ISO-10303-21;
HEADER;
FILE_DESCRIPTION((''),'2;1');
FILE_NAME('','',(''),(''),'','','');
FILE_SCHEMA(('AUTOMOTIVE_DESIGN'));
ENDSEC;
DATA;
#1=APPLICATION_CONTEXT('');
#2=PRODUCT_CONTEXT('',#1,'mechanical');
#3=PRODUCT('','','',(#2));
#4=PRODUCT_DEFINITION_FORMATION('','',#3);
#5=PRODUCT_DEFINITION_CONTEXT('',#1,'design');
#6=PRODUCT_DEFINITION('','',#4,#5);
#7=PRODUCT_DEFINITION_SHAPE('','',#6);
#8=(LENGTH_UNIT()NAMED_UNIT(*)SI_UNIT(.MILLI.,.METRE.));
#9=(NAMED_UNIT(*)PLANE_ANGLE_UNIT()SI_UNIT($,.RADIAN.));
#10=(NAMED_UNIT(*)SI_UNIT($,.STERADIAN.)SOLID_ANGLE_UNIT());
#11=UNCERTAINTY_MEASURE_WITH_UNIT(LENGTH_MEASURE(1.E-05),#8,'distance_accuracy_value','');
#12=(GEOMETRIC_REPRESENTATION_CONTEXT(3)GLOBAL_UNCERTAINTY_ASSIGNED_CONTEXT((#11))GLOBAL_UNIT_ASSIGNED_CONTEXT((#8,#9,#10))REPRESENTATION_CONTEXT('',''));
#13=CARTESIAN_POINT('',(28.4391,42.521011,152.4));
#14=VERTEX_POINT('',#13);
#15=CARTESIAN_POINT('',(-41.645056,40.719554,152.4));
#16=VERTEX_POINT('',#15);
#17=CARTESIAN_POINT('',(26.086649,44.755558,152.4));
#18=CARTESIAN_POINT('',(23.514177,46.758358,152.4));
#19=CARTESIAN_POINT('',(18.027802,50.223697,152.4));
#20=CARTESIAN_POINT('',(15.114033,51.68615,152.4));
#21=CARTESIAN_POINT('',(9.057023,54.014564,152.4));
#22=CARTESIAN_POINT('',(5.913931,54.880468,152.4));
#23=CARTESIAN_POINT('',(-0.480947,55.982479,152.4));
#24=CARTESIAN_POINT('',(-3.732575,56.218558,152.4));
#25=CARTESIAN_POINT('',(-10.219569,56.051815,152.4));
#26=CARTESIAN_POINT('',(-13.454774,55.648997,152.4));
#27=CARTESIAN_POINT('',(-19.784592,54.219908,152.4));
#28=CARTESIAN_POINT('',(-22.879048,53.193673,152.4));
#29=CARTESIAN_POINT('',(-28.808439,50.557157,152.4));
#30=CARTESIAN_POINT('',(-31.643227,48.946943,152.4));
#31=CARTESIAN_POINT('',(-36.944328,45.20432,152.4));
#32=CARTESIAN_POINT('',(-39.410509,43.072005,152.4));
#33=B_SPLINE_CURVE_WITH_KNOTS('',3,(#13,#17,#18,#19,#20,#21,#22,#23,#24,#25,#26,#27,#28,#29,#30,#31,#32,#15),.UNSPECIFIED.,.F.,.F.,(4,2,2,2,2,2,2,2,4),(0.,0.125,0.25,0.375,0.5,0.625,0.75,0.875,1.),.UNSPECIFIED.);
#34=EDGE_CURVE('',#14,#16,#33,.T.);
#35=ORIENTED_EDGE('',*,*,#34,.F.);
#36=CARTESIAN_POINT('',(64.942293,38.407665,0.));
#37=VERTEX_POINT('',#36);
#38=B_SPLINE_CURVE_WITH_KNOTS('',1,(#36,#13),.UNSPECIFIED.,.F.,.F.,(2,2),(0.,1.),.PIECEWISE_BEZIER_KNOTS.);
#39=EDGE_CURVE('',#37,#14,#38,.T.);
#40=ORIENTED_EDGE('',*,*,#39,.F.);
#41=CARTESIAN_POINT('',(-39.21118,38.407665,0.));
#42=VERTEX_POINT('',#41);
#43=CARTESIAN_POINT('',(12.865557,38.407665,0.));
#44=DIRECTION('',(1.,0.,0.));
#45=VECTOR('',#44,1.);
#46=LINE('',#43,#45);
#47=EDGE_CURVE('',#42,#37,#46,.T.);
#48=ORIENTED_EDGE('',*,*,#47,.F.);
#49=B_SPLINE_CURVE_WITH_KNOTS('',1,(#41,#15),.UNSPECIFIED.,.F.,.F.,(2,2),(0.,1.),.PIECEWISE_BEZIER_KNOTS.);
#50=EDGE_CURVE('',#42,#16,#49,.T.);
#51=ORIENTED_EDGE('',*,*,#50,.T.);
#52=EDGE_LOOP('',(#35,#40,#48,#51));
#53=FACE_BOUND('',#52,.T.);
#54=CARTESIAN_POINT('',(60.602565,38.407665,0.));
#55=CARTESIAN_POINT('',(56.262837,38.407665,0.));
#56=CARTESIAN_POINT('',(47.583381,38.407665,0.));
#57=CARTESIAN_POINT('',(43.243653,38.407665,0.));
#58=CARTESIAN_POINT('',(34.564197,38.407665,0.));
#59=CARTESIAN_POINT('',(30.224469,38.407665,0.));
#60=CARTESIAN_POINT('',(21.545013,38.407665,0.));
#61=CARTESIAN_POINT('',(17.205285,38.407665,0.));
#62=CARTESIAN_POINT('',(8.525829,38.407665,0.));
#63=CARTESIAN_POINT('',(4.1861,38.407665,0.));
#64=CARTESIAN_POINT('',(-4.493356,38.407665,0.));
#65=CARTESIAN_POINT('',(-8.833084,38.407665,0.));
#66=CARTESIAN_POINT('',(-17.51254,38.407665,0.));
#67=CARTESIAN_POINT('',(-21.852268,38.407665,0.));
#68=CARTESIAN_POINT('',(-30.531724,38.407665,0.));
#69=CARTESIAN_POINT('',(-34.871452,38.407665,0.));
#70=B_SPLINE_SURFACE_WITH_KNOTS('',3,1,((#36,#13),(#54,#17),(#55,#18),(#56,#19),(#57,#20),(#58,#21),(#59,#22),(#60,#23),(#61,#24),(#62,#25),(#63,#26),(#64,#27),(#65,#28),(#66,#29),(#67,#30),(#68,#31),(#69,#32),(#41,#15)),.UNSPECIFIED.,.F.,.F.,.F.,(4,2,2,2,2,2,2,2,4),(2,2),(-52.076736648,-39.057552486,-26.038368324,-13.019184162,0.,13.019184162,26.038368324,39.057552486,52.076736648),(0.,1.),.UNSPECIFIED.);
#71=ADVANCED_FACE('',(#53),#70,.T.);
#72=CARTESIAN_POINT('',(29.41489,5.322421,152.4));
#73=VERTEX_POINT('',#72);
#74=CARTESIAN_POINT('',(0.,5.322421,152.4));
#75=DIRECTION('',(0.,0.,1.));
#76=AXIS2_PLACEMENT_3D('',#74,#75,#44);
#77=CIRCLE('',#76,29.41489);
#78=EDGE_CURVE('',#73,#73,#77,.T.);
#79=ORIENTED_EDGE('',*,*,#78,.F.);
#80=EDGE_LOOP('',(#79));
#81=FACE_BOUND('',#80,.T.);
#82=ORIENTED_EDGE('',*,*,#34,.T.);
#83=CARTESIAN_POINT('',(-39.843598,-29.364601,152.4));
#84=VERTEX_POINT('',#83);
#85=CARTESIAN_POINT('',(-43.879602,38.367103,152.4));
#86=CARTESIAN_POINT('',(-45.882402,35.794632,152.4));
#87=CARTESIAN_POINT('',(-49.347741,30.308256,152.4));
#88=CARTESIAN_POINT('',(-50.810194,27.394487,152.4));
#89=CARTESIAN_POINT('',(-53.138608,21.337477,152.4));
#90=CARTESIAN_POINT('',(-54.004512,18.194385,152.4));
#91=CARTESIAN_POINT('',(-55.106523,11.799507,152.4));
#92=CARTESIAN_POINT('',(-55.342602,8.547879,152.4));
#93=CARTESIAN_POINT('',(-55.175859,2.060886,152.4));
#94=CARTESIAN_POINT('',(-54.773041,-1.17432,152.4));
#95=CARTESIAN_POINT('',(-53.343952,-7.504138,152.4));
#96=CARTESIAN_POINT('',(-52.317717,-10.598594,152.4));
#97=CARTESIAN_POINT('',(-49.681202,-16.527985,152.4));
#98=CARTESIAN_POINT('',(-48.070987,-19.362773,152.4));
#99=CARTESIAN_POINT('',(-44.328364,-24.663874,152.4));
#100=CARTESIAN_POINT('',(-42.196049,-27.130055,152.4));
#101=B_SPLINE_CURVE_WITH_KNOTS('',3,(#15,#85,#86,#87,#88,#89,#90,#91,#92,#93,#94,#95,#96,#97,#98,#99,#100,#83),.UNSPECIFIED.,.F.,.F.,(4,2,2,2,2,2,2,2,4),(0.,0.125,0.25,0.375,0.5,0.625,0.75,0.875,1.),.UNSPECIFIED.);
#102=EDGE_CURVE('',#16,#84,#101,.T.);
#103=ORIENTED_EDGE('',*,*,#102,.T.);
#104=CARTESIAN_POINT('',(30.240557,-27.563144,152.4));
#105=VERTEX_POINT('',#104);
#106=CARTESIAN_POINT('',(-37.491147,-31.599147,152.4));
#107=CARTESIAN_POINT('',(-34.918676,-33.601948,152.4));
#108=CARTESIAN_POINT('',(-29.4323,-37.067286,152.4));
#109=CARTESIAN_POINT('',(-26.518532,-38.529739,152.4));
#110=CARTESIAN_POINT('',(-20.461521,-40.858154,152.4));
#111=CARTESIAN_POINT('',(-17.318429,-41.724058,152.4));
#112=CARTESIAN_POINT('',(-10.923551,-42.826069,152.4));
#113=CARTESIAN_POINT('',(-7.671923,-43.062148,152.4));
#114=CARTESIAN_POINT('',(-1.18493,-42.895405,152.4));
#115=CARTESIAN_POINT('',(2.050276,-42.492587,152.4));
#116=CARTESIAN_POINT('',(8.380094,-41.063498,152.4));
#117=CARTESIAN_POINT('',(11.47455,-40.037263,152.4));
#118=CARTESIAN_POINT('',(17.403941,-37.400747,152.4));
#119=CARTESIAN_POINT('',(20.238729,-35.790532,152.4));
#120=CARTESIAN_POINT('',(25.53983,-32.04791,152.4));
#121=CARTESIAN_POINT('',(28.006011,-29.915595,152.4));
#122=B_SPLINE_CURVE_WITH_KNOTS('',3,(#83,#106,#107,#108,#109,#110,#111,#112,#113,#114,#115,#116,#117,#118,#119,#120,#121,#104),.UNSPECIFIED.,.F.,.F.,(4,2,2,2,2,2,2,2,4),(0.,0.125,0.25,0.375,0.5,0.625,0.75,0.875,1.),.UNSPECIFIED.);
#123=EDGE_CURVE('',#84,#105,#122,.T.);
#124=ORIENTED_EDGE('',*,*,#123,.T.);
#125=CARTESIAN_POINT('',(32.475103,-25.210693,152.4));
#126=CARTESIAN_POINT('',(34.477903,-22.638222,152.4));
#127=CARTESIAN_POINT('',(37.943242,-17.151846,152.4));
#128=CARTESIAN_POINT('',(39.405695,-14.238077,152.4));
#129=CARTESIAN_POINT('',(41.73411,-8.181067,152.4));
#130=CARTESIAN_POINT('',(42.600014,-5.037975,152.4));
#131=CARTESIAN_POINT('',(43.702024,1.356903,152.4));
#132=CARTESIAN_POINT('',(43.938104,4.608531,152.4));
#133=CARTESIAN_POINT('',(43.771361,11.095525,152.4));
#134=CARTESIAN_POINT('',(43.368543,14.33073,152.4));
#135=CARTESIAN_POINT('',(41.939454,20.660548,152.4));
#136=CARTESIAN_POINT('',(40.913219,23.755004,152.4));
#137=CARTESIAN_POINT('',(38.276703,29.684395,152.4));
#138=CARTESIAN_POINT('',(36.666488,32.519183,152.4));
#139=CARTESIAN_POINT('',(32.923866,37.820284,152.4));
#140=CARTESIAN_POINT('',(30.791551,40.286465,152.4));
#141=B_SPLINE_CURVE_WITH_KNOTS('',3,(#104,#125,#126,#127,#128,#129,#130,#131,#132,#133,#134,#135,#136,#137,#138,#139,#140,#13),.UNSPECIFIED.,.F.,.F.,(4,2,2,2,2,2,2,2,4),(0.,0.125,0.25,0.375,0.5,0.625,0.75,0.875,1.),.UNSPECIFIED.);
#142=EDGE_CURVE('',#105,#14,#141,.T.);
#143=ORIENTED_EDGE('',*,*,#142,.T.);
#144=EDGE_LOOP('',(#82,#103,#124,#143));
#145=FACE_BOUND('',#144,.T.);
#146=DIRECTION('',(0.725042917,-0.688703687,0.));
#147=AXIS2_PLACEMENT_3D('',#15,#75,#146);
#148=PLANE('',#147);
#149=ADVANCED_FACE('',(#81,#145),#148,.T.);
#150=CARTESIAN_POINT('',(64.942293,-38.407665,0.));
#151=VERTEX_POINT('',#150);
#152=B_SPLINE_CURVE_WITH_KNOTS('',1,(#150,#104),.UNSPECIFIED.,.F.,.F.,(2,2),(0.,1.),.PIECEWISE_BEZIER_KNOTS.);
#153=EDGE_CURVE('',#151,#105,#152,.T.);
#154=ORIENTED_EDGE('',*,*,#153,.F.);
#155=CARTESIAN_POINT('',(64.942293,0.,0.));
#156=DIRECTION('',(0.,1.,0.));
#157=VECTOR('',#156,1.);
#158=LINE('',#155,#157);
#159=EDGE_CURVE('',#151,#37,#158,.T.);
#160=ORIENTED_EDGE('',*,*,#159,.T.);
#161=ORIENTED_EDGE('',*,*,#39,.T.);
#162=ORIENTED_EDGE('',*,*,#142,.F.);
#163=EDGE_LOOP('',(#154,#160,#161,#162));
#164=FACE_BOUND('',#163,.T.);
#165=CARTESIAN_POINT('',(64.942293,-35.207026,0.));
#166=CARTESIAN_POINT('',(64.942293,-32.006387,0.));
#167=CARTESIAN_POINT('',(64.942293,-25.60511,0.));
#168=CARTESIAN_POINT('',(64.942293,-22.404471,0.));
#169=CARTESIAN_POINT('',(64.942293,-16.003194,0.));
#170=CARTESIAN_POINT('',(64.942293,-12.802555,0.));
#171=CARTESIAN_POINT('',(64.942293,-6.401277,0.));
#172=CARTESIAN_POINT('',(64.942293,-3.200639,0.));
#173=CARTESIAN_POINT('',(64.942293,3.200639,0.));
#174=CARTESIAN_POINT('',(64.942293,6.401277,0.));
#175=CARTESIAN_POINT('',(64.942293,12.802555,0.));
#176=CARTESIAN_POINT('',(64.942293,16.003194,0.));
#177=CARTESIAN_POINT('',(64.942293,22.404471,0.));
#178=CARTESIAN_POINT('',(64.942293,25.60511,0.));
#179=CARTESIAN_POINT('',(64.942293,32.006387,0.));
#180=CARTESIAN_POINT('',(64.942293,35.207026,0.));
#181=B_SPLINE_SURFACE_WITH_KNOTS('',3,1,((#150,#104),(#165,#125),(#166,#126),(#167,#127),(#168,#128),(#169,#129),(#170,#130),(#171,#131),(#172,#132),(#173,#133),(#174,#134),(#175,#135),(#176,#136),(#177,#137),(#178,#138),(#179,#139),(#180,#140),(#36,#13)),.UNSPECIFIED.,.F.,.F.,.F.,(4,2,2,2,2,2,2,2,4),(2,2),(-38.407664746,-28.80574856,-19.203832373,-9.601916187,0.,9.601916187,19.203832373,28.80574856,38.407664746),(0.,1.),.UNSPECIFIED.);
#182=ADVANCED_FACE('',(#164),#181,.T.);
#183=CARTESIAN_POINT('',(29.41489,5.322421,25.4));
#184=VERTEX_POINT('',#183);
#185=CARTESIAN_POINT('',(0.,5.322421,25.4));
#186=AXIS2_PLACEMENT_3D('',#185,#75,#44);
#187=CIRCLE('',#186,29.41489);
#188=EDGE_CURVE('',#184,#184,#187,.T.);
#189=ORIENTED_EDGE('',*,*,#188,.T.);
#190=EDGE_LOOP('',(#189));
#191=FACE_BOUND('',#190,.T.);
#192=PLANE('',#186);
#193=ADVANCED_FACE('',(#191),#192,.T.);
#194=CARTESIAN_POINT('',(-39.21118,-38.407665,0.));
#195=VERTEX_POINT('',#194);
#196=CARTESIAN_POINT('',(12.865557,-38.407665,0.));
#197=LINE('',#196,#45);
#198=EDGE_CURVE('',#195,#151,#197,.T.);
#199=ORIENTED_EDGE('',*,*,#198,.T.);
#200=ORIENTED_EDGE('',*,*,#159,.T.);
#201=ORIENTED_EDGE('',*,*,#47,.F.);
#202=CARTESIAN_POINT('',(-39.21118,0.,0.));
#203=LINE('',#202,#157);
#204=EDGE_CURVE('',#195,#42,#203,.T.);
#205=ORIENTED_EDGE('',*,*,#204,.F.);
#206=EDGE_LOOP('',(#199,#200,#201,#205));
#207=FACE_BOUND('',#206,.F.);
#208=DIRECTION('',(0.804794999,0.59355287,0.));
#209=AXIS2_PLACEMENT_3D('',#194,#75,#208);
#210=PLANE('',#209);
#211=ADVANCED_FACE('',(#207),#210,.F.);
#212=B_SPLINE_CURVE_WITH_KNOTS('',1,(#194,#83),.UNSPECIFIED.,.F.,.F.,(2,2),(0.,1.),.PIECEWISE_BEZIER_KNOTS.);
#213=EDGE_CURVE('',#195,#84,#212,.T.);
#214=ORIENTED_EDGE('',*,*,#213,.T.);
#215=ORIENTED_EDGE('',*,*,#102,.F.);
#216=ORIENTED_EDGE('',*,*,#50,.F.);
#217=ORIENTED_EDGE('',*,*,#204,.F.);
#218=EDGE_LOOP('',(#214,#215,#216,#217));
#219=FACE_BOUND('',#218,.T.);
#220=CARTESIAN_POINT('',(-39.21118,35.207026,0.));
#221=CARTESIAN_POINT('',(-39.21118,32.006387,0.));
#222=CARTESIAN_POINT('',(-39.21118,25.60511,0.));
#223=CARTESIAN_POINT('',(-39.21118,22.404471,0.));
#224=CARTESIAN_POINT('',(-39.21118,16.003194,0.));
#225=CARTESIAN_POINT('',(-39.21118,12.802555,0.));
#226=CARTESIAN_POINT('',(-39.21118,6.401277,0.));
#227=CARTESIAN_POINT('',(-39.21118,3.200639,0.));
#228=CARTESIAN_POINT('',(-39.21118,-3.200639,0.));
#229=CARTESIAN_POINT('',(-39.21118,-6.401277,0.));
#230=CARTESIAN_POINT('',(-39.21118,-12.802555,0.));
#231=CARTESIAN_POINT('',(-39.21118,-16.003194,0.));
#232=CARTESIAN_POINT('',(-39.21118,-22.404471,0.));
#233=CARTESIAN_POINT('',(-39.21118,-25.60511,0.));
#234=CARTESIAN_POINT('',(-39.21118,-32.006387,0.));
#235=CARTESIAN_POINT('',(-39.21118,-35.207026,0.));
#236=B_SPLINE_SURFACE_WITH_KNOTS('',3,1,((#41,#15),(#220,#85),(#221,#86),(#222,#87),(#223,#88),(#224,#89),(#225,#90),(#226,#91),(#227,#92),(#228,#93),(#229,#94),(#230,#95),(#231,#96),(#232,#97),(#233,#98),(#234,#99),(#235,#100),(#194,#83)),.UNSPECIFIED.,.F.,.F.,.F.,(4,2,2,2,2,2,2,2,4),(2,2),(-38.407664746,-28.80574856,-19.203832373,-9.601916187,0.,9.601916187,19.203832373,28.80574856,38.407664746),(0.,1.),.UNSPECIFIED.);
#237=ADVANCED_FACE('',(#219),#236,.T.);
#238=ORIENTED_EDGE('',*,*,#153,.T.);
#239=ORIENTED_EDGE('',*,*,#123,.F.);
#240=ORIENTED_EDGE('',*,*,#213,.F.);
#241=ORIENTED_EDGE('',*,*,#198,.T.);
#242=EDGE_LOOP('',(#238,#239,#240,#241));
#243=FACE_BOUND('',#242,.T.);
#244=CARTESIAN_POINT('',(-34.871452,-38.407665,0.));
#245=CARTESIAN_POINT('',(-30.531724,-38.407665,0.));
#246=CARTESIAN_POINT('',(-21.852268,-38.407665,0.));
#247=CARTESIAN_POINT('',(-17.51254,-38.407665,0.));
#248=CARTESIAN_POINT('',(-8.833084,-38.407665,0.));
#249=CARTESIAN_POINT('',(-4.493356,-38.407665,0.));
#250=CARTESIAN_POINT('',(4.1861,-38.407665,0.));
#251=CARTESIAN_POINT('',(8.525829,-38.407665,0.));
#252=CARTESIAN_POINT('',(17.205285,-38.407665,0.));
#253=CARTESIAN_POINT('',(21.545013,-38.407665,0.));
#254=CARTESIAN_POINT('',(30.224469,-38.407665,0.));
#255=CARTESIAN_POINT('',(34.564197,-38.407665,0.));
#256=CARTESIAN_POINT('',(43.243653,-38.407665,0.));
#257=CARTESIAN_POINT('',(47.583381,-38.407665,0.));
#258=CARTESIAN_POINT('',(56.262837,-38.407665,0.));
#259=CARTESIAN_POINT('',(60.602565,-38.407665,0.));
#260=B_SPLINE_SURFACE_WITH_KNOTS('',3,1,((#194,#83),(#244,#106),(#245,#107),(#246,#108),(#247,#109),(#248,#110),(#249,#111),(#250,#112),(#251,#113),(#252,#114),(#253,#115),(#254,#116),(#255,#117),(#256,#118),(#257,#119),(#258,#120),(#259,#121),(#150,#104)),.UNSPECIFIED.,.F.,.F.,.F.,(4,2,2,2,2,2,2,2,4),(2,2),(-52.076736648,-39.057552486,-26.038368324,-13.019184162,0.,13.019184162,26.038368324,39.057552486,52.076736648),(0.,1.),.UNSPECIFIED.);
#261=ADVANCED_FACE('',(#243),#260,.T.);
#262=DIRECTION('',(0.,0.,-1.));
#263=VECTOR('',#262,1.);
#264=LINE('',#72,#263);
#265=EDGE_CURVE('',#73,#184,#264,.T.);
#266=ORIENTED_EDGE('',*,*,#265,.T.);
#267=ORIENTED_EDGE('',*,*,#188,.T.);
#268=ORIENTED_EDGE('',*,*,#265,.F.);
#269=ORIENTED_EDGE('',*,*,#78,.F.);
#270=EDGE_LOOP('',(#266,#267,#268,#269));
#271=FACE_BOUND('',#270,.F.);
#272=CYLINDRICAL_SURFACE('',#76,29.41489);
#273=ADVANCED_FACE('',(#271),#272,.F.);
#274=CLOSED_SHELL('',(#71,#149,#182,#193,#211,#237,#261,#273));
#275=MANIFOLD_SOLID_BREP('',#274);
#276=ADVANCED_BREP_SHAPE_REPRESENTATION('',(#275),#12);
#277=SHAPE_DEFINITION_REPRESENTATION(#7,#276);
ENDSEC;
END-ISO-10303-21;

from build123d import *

# Parameters (mm, degrees)
F0_W     = 104.1534732964
F0_H     = 76.8153294921
F4_R     = 29.4148902483
F5_DEPTH = 127


# Not quite as in the source:
# - the arcs of a loft's sections are written as splines that run evenly, so that the points pair up as in the source's solid


with BuildPart() as f3:
    # F0 (on Top) → F3 section 0
    with BuildSketch(Plane.XY):
        with Locations((12.8655565871, 0)):
            Rectangle(F0_W, F0_H)
    # F2 (on offset) → F3 section 1
    with BuildSketch(Plane.XY.offset(152.4)):
        with BuildLine():
            add(Edge.make_bspline(
                [(-41.6450555416, 40.7195541248), (-43.8796016064, 38.3671029534), (-45.8824019296, 35.7946318153), (-49.3477407941, 30.3082562291), (-50.810193648, 27.3944874425), (-53.1386082181, 21.3374769498), (-54.0045123596, 18.1943850152), (-55.1065229691, 11.7995071325), (-55.3426021877, 8.5478793103), (-55.175859187, 2.0608856083), (-54.7730410907, -1.1743198678), (-53.3439523197, -7.5041378591), (-52.3177169821, -10.5985938571), (-49.6812015209, -16.5279847821), (-48.0709865904, -19.3627730932), (-44.3283642496, -24.6638737839), (-42.196049383, -27.1300550832), (-39.8435982116, -29.3646011481)],
                knots=[0, 0, 0, 0, 0.125, 0.125, 0.25, 0.25, 0.375, 0.375, 0.5, 0.5, 0.625, 0.625, 0.75, 0.75, 0.875, 0.875, 1, 1, 1, 1], degree=3))
            add(Edge.make_bspline(
                [(-39.8435982116, -29.3646011481), (-37.4911470402, -31.5991472129), (-34.9186759021, -33.6019475362), (-29.4323003159, -37.0672864006), (-26.5185315293, -38.5297392545), (-20.4615210366, -40.8581538246), (-17.318429102, -41.7240579661), (-10.9235512193, -42.8260685756), (-7.6719233971, -43.0621477942), (-1.1849296951, -42.8954047935), (2.050275781, -42.4925866972), (8.3800937724, -41.0634979262), (11.4745497703, -40.0372625886), (17.4039406953, -37.4007471274), (20.2387290065, -35.7905321969), (25.5398296971, -32.0479098561), (28.0060109965, -29.9155949895), (30.2405570613, -27.5631438181)],
                knots=[0, 0, 0, 0, 0.125, 0.125, 0.25, 0.25, 0.375, 0.375, 0.5, 0.5, 0.625, 0.625, 0.75, 0.75, 0.875, 0.875, 1, 1, 1, 1], degree=3))
            add(Edge.make_bspline(
                [(30.2405570613, -27.5631438181), (32.4751031261, -25.2106926468), (34.4779034494, -22.6382215086), (37.9432423138, -17.1518459224), (39.4056951677, -14.2380771358), (41.7341097378, -8.1810666431), (42.6000138793, -5.0379747085), (43.7020244888, 1.3569031742), (43.9381037074, 4.6085309964), (43.7713607067, 11.0955246984), (43.3685426104, 14.3307301745), (41.9394538394, 20.6605481658), (40.9132185018, 23.7550041638), (38.2767030406, 29.6843950888), (36.6664881101, 32.5191833999), (32.9238657693, 37.8202840906), (30.7915509027, 40.2864653899), (28.4390997313, 42.5210114548)],
                knots=[0, 0, 0, 0, 0.125, 0.125, 0.25, 0.25, 0.375, 0.375, 0.5, 0.5, 0.625, 0.625, 0.75, 0.75, 0.875, 0.875, 1, 1, 1, 1], degree=3))
            add(Edge.make_bspline(
                [(28.4390997313, 42.5210114548), (26.08664856, 44.7555575196), (23.5141774218, 46.7583578429), (18.0278018356, 50.2236967073), (15.114033049, 51.6861495612), (9.0570225563, 54.0145641313), (5.9139306218, 54.8804682728), (-0.480947261, 55.9824788823), (-3.7325750832, 56.2185581009), (-10.2195687852, 56.0518151002), (-13.4547742613, 55.6489970039), (-19.7845922526, 54.2199082329), (-22.8790482506, 53.1936728953), (-28.8084391756, 50.5571574341), (-31.6432274867, 48.9469425036), (-36.9443281774, 45.2043201628), (-39.4105094767, 43.0720052962), (-41.6450555416, 40.7195541248)],
                knots=[0, 0, 0, 0, 0.125, 0.125, 0.25, 0.25, 0.375, 0.375, 0.5, 0.5, 0.625, 0.625, 0.75, 0.75, 0.875, 0.875, 1, 1, 1, 1], degree=3))
        make_face()
    loft(ruled=True)

    # F4 (on face) → F5 (cut)
    with BuildSketch(Plane.XY.offset(152.4)):
        with Locations((0, 5.3224205039)):
            Circle(F4_R)
    extrude(amount=-F5_DEPTH, mode=Mode.SUBTRACT)


solid = f3.part
